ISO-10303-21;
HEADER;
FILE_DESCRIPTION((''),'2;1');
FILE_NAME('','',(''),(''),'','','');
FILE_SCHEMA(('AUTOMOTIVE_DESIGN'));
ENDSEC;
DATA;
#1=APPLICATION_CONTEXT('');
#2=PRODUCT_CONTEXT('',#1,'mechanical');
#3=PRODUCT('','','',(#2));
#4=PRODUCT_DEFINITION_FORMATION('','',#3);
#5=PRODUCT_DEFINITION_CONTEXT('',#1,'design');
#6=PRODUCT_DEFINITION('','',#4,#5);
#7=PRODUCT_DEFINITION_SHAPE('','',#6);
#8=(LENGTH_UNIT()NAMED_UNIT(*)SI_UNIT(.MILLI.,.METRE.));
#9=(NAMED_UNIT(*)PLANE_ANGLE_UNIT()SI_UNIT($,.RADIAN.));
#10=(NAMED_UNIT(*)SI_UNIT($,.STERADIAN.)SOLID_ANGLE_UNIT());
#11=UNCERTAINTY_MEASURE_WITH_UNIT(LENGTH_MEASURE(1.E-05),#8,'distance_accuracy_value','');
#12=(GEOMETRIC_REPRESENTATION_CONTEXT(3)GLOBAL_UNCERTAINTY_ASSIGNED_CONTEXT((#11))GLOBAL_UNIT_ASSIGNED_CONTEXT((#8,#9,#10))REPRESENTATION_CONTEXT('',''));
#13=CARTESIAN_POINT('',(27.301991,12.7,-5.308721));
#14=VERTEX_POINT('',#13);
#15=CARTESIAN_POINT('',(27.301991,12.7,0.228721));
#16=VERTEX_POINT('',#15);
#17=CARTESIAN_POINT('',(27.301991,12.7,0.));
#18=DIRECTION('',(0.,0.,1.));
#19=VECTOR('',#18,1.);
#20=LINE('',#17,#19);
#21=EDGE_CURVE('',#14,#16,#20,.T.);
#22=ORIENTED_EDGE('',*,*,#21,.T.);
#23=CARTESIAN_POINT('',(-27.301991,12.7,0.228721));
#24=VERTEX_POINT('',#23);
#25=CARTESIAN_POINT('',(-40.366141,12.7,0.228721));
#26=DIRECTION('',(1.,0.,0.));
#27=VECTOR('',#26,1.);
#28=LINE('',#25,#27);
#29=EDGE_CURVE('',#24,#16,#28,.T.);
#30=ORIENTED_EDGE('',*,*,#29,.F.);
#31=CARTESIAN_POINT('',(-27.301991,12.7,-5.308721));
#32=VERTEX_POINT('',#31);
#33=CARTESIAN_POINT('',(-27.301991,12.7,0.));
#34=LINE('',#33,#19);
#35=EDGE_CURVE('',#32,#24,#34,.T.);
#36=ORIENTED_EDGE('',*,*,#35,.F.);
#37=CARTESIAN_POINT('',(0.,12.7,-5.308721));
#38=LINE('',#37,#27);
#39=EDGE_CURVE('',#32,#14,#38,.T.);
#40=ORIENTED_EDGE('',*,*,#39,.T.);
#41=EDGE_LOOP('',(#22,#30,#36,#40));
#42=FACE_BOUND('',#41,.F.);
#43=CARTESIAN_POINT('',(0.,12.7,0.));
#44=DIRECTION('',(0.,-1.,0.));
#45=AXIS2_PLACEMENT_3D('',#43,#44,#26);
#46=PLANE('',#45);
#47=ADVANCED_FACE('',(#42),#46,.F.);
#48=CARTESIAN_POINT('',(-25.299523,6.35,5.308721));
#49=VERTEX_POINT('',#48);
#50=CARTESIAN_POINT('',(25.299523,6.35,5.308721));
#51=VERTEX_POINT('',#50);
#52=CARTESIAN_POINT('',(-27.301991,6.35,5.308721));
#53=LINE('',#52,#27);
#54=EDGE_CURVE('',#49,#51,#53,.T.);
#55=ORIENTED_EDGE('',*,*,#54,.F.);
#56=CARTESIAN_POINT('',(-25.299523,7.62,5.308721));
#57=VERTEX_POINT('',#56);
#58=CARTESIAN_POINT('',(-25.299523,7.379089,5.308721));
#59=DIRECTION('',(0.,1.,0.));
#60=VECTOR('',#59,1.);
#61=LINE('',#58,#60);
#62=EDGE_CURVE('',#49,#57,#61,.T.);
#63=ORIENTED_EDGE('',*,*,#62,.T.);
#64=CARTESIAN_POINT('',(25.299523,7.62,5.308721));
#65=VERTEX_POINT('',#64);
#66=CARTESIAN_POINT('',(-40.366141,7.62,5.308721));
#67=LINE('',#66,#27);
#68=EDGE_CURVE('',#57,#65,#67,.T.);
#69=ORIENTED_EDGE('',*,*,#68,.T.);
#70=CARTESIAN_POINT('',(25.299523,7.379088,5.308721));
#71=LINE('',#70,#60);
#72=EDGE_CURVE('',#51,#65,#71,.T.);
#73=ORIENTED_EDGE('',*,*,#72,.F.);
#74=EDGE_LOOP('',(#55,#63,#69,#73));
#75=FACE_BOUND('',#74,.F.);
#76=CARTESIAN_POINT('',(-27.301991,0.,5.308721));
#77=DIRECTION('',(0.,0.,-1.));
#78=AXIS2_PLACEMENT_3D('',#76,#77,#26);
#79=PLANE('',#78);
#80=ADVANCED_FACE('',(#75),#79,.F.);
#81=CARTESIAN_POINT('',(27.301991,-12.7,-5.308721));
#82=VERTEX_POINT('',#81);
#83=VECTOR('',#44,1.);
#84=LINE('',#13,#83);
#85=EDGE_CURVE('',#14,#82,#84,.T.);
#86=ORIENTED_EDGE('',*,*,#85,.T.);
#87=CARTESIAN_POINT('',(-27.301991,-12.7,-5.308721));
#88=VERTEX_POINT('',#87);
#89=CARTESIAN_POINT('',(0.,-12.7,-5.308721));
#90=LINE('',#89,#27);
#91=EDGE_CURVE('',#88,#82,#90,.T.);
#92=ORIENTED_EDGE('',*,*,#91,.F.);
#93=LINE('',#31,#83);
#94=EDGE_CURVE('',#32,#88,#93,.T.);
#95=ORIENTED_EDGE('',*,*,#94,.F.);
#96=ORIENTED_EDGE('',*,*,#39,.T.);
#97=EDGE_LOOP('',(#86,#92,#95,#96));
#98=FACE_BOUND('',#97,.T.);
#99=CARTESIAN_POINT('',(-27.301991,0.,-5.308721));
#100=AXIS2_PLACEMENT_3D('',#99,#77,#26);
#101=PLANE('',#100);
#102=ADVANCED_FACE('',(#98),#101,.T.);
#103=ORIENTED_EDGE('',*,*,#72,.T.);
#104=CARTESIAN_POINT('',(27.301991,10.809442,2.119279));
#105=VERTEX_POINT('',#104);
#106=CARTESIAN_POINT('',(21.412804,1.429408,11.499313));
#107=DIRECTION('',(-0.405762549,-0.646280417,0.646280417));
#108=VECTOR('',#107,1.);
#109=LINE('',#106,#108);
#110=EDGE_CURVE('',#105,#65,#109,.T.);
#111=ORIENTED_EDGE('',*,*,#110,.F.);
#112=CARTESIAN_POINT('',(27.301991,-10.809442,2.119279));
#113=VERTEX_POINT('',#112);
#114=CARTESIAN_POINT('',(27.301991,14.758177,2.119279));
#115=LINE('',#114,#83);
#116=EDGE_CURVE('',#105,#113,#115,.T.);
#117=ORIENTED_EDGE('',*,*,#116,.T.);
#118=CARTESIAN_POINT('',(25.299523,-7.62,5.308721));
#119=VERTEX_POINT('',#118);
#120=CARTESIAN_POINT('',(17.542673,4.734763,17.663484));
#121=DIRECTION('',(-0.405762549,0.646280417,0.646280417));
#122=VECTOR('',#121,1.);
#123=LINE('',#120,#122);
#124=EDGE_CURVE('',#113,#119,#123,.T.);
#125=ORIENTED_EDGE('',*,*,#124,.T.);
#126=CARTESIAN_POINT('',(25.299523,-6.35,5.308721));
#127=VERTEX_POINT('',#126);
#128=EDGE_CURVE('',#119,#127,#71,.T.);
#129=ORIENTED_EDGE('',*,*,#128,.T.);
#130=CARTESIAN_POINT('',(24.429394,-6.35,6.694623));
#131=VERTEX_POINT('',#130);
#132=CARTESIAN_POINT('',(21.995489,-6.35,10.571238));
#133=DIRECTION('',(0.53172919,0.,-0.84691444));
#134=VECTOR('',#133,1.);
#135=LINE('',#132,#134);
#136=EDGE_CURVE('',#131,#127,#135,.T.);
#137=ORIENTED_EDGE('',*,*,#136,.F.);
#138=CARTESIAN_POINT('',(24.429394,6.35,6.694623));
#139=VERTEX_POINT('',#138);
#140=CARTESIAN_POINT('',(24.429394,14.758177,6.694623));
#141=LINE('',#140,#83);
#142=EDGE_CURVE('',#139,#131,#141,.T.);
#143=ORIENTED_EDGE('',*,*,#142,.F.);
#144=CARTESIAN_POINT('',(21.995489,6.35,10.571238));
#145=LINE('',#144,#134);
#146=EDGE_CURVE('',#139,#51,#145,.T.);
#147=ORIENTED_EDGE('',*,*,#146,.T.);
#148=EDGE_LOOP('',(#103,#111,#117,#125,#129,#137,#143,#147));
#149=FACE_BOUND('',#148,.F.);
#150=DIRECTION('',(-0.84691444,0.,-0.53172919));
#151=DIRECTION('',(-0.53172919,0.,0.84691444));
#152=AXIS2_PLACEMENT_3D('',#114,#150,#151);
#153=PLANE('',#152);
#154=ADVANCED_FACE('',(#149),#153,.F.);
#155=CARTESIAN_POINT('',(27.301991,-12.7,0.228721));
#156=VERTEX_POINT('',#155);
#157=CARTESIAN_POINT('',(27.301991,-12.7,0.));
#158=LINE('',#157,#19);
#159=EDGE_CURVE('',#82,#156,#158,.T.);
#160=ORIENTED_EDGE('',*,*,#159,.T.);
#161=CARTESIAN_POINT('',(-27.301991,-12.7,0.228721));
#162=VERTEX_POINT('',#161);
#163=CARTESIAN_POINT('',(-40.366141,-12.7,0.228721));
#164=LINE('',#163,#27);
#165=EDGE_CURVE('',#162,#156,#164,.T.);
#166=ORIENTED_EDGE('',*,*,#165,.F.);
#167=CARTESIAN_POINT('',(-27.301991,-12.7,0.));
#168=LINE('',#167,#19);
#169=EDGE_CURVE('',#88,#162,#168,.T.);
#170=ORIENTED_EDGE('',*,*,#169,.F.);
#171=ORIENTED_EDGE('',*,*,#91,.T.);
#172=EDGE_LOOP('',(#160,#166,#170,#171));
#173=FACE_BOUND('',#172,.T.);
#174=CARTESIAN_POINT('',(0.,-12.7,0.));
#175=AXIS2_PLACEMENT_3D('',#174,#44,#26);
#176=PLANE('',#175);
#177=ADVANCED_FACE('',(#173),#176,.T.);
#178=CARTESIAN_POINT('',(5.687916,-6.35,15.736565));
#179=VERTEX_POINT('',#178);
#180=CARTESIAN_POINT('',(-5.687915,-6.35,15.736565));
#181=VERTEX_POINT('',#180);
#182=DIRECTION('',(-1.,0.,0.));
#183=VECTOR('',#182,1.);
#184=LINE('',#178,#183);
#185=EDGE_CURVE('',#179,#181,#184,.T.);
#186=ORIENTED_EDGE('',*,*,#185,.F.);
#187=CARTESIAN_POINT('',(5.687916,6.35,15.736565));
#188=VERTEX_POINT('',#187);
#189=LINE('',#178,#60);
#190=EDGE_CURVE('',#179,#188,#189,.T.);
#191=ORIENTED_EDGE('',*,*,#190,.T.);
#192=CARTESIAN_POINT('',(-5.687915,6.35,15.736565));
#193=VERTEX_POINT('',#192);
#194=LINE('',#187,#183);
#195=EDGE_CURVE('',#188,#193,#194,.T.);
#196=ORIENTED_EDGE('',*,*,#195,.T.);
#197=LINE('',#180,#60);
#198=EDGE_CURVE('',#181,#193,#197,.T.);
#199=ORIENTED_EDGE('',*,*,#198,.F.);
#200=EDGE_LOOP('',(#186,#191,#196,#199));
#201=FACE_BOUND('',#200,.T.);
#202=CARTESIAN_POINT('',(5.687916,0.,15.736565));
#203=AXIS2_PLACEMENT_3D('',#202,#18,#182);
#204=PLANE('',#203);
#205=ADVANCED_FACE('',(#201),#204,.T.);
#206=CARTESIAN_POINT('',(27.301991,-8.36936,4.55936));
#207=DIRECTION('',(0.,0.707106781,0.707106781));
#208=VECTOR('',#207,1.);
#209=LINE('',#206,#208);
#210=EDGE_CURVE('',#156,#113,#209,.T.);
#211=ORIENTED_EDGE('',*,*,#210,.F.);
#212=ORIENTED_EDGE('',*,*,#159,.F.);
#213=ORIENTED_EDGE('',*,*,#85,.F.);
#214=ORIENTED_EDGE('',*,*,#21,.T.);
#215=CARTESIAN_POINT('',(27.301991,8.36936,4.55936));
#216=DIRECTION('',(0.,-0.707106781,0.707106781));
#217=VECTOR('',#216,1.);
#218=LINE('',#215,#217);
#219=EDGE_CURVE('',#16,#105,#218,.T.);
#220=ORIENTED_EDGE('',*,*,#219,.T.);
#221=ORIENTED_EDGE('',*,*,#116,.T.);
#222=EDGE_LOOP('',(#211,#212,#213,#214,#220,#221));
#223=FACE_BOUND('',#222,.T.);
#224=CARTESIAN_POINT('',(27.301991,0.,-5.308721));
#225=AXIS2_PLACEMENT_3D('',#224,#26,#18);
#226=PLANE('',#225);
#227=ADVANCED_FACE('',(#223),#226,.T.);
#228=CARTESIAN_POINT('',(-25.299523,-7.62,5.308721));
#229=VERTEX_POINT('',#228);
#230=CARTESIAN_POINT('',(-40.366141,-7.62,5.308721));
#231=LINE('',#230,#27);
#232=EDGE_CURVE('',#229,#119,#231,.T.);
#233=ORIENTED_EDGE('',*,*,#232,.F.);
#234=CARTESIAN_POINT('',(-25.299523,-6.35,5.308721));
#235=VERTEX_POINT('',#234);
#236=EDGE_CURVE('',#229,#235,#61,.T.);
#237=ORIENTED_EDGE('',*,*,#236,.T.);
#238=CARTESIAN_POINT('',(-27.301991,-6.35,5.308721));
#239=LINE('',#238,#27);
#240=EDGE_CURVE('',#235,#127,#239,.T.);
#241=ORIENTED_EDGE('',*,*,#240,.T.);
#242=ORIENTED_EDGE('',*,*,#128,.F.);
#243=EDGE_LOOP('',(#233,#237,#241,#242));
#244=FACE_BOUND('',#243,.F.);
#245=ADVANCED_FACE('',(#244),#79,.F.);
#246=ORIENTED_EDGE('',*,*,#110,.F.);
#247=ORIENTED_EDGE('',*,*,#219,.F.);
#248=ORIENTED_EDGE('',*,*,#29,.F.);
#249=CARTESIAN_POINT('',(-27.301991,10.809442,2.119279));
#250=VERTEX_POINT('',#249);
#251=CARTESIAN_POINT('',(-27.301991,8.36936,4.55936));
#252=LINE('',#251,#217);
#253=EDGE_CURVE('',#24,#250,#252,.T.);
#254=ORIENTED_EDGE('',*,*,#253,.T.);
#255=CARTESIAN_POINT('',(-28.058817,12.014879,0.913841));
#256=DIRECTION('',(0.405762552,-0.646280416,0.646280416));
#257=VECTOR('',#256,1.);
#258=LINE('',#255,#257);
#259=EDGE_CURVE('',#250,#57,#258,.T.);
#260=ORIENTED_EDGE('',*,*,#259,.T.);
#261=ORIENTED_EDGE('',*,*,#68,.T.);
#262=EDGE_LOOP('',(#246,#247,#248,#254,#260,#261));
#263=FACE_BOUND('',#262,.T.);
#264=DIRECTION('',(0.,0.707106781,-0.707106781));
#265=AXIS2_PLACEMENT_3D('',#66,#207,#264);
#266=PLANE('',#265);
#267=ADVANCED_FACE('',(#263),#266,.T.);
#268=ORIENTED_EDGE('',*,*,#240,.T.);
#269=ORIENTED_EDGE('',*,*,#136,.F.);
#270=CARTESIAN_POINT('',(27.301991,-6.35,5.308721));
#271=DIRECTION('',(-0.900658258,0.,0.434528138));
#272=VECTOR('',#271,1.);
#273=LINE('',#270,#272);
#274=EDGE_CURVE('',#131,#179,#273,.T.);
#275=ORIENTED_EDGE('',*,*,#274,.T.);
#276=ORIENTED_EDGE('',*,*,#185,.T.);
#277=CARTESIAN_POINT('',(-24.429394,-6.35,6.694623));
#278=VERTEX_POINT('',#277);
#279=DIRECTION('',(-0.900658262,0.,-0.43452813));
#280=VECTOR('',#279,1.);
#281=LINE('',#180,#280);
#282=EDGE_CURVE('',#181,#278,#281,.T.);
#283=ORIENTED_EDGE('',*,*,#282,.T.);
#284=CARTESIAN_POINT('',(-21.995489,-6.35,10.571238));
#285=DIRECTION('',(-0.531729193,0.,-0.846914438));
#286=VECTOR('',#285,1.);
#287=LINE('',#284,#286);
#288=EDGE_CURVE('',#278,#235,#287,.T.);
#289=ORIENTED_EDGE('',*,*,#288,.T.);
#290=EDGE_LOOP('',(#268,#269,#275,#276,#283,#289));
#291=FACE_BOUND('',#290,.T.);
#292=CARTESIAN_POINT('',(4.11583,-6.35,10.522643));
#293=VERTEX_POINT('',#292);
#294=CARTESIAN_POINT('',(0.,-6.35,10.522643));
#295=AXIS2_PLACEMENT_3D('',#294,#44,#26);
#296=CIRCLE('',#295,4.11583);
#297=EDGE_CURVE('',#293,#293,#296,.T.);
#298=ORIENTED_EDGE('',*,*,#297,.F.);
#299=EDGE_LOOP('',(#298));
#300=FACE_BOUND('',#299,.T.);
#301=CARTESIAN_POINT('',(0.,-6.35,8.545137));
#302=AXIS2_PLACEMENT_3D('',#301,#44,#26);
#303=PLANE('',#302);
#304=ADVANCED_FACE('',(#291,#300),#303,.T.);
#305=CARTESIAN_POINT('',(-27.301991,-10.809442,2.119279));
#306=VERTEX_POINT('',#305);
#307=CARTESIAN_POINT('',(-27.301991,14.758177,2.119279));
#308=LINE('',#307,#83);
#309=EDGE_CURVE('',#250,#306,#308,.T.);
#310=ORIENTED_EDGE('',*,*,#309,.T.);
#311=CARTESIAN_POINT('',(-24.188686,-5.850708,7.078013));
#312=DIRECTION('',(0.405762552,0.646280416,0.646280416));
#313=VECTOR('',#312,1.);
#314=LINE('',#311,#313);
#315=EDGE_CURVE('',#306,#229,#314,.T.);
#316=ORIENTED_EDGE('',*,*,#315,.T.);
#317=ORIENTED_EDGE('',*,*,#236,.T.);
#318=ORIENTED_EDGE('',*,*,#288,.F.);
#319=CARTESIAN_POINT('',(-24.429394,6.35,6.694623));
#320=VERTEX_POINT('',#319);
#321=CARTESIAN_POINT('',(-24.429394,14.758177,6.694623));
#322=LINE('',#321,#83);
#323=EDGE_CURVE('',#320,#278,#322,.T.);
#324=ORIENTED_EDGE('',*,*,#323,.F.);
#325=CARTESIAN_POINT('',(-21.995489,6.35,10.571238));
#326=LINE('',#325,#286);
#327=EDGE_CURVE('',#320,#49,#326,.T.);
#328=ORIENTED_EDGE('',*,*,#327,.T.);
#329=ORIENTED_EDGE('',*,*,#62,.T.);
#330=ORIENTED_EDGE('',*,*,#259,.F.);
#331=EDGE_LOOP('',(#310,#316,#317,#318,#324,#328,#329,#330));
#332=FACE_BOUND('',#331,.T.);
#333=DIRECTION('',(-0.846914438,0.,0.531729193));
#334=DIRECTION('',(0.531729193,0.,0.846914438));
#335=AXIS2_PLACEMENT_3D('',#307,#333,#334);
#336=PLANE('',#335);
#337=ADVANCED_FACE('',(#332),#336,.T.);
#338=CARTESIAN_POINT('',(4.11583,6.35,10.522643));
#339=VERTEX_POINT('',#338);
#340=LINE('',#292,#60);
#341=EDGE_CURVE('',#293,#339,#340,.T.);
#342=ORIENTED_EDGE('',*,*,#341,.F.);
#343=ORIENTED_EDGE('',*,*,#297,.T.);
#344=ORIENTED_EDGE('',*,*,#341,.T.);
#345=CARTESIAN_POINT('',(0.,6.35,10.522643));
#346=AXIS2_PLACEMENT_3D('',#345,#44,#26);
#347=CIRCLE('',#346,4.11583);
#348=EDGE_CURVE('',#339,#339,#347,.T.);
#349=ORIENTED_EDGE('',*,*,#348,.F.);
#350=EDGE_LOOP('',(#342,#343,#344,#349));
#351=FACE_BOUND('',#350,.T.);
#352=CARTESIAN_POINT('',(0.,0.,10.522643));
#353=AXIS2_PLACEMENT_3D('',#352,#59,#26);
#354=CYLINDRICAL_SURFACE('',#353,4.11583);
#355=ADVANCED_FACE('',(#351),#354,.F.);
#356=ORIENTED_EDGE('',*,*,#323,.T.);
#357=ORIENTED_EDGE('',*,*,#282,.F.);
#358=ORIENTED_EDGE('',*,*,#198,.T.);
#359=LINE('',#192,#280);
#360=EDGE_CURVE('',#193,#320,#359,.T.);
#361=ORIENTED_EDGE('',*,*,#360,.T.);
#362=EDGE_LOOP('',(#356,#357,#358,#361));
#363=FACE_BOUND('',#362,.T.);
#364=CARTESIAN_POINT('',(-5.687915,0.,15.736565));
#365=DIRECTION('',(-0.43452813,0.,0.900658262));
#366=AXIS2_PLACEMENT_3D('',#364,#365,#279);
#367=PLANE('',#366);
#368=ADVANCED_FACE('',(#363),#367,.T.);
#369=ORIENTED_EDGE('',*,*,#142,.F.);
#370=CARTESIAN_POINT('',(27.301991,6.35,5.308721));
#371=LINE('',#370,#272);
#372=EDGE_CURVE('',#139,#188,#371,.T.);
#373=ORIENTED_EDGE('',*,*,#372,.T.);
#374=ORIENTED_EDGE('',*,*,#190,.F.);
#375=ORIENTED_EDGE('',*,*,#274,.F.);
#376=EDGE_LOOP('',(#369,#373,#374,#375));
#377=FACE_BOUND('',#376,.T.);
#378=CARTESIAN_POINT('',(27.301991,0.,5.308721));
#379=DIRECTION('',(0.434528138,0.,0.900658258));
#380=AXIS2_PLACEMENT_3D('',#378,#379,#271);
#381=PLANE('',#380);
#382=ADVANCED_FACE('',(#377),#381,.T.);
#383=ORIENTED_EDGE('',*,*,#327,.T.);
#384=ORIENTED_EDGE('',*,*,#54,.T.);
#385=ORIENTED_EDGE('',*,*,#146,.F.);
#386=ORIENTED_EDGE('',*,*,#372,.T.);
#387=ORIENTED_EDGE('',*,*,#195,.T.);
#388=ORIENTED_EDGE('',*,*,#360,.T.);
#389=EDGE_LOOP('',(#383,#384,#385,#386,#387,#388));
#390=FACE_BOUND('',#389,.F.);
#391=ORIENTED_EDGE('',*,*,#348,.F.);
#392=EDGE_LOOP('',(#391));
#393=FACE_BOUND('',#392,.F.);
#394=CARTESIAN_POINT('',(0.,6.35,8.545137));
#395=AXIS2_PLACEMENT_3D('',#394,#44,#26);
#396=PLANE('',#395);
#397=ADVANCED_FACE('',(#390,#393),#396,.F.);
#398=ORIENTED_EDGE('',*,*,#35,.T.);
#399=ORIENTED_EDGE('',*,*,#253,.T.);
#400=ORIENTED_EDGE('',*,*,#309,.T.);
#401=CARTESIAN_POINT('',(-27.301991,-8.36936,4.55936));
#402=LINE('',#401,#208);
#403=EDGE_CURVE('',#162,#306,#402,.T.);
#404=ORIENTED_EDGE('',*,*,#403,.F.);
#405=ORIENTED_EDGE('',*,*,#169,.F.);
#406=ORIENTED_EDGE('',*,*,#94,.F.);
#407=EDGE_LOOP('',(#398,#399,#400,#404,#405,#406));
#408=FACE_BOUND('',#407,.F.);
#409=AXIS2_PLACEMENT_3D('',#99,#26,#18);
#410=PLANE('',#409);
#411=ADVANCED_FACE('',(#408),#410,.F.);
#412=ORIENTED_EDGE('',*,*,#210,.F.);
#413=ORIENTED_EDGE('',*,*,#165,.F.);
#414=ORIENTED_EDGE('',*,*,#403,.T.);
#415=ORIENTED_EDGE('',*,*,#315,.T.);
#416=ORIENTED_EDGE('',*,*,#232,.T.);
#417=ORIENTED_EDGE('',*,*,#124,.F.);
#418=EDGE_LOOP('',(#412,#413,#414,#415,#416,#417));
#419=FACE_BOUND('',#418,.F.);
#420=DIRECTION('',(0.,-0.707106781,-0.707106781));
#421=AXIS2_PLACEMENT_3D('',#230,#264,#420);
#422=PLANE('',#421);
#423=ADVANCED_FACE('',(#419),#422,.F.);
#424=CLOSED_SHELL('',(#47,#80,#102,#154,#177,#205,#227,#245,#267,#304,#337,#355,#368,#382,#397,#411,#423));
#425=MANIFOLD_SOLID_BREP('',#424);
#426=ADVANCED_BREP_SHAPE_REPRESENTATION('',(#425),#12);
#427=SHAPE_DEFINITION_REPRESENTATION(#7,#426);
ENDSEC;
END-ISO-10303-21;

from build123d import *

# Parameters (mm, degrees)
F0_R        = 4.1158301742
F1_DEPTH    = 6.35
F0_W        = 54.6039827168
F0_H        = 10.6174414977
F2_DEPTH    = 12.7
F3_T1_DEPTH = 80.7322818745
F3_T3_DEPTH = 29.5163540068
F3_T5_DEPTH = 29.5163538598


# Not quite as in the source:
# - a fillet or chamfer that OpenCascade refuses, or shapes differently, is made with other operations: its cross-section is extruded or revolved along the edge and cut away or added


with BuildPart() as f1:
    # F0 (on Front) → F1 (new body, symmetric)
    with BuildSketch(Plane.XZ):
        Polygon((-5.6879152544, 15.7365649939), (-27.3019913584, 5.3087207489), (27.3019913584, 5.3087207489), (5.68791572, 15.7365649939), (0, 15.7365649939), align=None)
        with Locations((0, 10.5226428714)):
            Circle(F0_R, mode=Mode.SUBTRACT)
    extrude(amount=F1_DEPTH, both=True)

    # F0 (on Front) → F2 (join, symmetric)
    with BuildSketch(Plane.XZ):
        Rectangle(F0_W, F0_H)
    extrude(amount=F2_DEPTH, both=True)

    # F3: chamfer of 5.08 on 4 edges, made by hand

    # F3_s2 → F3_t1 (cut)
    with BuildSketch(Plane.YZ.offset(-40.3661409373)):
        Polygon((-7.62, 5.3087207489), (-12.7, 0.2287207489), (-12.7, 5.3087207489), align=None)
        Polygon((7.62, 5.3087207489), (12.7, 0.2287207489), (12.7, 5.3087207489), align=None)
    extrude(amount=F3_T1_DEPTH, mode=Mode.SUBTRACT)

    # F3_s4 → F3_t3 (cut)
    with BuildSketch(Plane.XZ.offset(-14.7581770034)):
        Polygon((-27.3019913584, 2.1192789571), (-24.4293942586, 6.6946229263), (-27.3019913584, 5.3087207489), align=None)
    extrude(amount=F3_T3_DEPTH, mode=Mode.SUBTRACT)

    # F3_s6 → F3_t5 (cut)
    with BuildSketch(Plane.XZ.offset(-14.7581769299)):
        Polygon((27.3019913584, 2.119278987), (24.4293942972, 6.6946229375), (27.3019913584, 5.3087207489), align=None)
    extrude(amount=F3_T5_DEPTH, mode=Mode.SUBTRACT)


solid = f1.part
